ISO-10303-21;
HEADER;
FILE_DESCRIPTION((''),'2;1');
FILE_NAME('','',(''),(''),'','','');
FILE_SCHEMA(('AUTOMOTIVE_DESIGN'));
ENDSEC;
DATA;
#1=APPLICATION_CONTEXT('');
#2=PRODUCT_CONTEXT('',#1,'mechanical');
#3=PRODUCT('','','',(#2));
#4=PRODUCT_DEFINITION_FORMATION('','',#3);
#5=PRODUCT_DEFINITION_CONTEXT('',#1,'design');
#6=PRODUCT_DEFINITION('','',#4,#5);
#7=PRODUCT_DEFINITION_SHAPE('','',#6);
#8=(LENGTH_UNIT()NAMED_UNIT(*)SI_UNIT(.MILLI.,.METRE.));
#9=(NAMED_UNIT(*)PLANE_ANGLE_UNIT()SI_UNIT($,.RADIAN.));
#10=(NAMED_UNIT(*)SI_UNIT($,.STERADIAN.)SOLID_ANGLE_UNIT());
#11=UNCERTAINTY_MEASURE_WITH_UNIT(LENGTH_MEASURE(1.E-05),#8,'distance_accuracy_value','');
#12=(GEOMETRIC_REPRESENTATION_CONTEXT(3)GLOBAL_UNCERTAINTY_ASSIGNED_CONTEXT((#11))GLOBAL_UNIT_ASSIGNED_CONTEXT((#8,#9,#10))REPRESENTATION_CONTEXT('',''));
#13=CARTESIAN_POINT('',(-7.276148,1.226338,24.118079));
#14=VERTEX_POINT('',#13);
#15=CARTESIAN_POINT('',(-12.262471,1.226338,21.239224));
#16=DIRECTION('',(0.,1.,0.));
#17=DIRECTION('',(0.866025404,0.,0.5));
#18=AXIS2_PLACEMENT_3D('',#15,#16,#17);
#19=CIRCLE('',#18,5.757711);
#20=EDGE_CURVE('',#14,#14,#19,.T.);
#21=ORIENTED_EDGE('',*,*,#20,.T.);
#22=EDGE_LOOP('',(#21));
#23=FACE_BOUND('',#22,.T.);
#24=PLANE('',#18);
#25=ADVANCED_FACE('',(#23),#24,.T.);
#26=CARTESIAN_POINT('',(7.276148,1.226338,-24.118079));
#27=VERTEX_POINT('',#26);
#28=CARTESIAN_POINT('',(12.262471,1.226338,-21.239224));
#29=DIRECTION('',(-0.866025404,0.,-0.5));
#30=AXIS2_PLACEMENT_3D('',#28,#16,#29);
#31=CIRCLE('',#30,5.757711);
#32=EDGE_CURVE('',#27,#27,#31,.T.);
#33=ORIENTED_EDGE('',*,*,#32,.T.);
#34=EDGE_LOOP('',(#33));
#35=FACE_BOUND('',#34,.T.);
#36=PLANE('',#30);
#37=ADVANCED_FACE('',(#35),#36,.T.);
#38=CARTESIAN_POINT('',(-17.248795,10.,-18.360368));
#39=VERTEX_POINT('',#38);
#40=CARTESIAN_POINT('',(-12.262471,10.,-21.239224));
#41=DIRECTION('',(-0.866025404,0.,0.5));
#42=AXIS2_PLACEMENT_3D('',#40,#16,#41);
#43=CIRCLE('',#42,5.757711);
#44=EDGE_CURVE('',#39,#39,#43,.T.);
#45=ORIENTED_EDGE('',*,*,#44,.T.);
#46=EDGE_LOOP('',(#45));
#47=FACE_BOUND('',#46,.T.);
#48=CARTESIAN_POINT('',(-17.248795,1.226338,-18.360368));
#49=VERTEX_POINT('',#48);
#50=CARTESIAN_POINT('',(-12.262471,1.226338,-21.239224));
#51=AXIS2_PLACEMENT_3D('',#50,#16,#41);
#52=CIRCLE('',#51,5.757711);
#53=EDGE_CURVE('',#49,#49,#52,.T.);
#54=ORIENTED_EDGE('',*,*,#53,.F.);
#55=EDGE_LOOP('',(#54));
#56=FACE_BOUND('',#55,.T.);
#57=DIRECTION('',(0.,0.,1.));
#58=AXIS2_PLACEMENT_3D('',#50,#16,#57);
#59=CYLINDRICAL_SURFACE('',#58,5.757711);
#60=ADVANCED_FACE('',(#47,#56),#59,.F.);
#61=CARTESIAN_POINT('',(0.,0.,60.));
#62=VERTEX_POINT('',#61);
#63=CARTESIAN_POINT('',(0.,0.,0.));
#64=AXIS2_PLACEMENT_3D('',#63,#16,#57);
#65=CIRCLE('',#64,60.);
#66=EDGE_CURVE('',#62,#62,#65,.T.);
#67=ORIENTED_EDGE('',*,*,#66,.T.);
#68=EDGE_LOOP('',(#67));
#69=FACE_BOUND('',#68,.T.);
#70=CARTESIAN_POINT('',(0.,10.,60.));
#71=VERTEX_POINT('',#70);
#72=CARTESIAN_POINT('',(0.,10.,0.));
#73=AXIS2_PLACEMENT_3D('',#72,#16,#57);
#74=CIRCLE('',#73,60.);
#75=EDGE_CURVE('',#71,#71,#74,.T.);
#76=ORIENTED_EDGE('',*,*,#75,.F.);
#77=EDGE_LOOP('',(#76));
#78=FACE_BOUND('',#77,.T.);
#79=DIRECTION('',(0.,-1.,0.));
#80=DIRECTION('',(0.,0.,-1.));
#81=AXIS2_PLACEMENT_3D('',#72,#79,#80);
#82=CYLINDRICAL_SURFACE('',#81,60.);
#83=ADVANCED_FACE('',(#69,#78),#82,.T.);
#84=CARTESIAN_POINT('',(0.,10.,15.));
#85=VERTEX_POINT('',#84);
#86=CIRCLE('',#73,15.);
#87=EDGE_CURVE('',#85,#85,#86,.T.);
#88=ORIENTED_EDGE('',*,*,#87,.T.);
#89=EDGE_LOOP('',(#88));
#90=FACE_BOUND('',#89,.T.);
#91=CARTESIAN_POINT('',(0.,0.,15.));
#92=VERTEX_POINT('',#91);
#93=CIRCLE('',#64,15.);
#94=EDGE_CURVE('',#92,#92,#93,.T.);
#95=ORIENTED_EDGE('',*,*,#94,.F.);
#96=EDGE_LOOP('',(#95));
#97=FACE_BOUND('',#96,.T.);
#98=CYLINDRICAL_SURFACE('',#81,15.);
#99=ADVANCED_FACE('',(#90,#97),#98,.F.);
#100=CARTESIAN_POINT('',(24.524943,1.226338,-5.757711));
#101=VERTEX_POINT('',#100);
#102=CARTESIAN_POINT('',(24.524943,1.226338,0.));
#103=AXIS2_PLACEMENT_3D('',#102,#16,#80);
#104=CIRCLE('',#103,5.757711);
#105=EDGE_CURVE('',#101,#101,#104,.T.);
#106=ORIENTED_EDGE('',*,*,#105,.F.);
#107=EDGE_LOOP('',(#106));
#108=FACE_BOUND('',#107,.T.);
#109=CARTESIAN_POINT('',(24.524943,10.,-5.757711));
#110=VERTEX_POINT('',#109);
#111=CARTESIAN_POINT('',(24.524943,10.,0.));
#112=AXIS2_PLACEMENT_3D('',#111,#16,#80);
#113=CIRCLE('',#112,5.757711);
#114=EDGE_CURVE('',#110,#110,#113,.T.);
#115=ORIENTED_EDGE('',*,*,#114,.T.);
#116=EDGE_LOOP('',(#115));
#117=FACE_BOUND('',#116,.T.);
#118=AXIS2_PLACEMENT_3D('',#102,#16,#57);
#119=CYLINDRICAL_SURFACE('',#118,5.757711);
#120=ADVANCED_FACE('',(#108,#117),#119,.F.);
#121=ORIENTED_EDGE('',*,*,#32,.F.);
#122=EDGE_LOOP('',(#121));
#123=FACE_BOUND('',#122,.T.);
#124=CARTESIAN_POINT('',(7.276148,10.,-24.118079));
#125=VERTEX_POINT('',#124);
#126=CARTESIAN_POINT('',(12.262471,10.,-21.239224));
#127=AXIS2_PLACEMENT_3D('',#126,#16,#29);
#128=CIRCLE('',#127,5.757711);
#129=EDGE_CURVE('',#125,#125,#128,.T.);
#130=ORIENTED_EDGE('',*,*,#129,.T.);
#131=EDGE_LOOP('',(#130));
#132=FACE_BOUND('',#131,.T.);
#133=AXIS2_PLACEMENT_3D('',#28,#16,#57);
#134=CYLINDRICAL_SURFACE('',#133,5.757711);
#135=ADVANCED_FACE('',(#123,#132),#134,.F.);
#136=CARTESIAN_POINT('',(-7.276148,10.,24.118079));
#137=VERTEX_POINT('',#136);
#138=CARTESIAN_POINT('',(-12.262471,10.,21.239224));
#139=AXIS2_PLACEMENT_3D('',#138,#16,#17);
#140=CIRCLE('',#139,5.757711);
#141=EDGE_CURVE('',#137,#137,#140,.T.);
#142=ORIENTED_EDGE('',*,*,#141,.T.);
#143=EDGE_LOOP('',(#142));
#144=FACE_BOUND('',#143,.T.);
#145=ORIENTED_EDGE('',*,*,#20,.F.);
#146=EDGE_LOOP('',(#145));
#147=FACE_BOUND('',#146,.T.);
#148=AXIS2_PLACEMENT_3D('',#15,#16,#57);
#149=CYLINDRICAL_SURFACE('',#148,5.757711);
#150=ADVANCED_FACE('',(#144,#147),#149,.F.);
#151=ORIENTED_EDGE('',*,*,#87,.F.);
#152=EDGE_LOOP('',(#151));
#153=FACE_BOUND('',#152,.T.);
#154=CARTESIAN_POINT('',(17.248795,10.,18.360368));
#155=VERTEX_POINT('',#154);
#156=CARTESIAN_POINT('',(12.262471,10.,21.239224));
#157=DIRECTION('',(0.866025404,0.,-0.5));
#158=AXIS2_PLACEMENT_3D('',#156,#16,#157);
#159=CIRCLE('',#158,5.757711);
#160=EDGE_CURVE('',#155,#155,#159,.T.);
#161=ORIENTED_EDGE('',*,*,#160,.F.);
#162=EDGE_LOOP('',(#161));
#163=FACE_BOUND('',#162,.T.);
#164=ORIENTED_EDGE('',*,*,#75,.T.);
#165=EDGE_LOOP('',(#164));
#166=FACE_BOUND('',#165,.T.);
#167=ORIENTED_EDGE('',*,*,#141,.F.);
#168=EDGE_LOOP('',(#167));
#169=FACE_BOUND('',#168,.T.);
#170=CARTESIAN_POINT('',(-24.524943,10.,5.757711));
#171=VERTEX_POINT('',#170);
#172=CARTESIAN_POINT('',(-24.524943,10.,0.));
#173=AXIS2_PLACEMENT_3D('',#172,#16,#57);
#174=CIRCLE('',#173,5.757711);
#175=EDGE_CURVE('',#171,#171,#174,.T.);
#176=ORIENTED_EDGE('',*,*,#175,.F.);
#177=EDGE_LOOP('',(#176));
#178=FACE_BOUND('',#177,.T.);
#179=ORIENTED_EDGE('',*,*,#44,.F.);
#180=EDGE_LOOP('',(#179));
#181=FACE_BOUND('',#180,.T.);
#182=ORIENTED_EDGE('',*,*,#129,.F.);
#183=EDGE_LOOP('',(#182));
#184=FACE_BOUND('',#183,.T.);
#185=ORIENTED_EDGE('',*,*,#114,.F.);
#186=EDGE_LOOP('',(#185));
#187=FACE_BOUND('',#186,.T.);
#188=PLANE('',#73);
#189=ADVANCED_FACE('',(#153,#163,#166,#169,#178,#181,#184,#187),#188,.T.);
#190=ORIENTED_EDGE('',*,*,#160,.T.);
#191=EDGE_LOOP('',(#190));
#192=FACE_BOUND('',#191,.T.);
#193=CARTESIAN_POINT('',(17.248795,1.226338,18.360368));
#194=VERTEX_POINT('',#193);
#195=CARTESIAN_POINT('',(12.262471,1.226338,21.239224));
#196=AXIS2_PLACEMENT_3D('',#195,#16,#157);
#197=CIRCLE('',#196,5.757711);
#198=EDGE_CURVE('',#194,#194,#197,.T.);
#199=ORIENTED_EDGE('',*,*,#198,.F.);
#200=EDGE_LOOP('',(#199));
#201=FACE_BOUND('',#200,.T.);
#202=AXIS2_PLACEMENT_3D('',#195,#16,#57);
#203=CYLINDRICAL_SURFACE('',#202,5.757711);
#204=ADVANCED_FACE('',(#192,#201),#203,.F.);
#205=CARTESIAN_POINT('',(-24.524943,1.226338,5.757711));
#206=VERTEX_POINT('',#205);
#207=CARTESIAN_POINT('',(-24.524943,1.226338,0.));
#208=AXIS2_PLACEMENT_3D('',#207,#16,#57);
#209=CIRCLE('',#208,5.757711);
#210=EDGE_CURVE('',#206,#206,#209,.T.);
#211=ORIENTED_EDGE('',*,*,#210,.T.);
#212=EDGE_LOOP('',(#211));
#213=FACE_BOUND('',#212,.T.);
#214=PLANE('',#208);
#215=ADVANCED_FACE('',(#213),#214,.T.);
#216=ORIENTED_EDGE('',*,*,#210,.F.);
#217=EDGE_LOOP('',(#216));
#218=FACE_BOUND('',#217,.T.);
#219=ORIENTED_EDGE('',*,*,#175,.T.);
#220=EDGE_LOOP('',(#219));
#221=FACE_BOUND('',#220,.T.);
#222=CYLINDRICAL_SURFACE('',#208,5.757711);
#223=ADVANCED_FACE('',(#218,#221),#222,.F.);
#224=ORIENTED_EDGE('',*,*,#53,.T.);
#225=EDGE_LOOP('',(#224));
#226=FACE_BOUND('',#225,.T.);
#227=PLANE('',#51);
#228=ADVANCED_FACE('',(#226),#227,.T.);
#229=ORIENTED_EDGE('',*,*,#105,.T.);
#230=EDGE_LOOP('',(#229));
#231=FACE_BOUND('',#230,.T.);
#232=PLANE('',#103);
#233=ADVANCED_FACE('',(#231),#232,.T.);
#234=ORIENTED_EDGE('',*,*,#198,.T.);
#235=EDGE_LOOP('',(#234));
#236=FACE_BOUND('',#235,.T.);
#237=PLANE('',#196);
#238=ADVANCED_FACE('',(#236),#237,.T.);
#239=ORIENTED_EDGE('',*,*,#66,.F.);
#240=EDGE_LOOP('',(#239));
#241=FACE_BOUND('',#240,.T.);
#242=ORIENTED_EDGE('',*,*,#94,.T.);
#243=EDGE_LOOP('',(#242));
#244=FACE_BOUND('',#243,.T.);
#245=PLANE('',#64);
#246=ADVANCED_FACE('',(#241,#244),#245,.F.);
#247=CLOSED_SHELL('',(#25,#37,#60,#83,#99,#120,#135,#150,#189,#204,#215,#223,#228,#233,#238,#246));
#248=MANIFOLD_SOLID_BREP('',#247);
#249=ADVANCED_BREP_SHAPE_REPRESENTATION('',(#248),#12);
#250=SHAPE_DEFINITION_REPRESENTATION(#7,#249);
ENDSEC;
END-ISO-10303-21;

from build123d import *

# Parameters (mm, degrees)
SKETCH1_R           = 60
BOSS_EXTRUDE1_DEPTH = 10
SKETCH2_R           = 15
CUT_EXTRUDE1_DEPTH  = 86.440037453
SKETCH3_R           = 5.757710669
CUT_EXTRUDE2_DEPTH  = 8.773662062
CIRPATTERN1_COUNT   = 6


with BuildPart() as part:
    # Sketch1 → Boss-Extrude1 (new body)
    with BuildSketch(Plane(origin=(0, 0, 0), x_dir=(1, 0, 0), z_dir=(0, 1, 0))):
        Circle(SKETCH1_R)
    extrude(amount=BOSS_EXTRUDE1_DEPTH)

    # Sketch2 → Cut-Extrude1 (cut, through all)
    with BuildSketch(Plane(origin=(0, 0, 0), x_dir=(1, 0, 0), z_dir=(0, 1, 0))):
        Circle(SKETCH2_R)
    extrude(amount=CUT_EXTRUDE1_DEPTH, mode=Mode.SUBTRACT)

    # Sketch3 → Cut-Extrude2 (cut)
    with BuildSketch(Plane(origin=(0, 10, 0), x_dir=(1, 0, 0), z_dir=(0, 1, 0))):
        with Locations((-24.524942952, 0)):
            Circle(SKETCH3_R)
    cut_extrude2 = extrude(amount=-CUT_EXTRUDE2_DEPTH, mode=Mode.SUBTRACT)

    # CirPattern1: Cut-Extrude2 ×6 about axis
    cirpattern1_axis = Axis((0, 0, 0), (0, 1, 0))
    for i in range(1, CIRPATTERN1_COUNT):
        add(cut_extrude2.rotate(cirpattern1_axis, i * 360 / CIRPATTERN1_COUNT), mode=Mode.SUBTRACT)


solid = part.part
